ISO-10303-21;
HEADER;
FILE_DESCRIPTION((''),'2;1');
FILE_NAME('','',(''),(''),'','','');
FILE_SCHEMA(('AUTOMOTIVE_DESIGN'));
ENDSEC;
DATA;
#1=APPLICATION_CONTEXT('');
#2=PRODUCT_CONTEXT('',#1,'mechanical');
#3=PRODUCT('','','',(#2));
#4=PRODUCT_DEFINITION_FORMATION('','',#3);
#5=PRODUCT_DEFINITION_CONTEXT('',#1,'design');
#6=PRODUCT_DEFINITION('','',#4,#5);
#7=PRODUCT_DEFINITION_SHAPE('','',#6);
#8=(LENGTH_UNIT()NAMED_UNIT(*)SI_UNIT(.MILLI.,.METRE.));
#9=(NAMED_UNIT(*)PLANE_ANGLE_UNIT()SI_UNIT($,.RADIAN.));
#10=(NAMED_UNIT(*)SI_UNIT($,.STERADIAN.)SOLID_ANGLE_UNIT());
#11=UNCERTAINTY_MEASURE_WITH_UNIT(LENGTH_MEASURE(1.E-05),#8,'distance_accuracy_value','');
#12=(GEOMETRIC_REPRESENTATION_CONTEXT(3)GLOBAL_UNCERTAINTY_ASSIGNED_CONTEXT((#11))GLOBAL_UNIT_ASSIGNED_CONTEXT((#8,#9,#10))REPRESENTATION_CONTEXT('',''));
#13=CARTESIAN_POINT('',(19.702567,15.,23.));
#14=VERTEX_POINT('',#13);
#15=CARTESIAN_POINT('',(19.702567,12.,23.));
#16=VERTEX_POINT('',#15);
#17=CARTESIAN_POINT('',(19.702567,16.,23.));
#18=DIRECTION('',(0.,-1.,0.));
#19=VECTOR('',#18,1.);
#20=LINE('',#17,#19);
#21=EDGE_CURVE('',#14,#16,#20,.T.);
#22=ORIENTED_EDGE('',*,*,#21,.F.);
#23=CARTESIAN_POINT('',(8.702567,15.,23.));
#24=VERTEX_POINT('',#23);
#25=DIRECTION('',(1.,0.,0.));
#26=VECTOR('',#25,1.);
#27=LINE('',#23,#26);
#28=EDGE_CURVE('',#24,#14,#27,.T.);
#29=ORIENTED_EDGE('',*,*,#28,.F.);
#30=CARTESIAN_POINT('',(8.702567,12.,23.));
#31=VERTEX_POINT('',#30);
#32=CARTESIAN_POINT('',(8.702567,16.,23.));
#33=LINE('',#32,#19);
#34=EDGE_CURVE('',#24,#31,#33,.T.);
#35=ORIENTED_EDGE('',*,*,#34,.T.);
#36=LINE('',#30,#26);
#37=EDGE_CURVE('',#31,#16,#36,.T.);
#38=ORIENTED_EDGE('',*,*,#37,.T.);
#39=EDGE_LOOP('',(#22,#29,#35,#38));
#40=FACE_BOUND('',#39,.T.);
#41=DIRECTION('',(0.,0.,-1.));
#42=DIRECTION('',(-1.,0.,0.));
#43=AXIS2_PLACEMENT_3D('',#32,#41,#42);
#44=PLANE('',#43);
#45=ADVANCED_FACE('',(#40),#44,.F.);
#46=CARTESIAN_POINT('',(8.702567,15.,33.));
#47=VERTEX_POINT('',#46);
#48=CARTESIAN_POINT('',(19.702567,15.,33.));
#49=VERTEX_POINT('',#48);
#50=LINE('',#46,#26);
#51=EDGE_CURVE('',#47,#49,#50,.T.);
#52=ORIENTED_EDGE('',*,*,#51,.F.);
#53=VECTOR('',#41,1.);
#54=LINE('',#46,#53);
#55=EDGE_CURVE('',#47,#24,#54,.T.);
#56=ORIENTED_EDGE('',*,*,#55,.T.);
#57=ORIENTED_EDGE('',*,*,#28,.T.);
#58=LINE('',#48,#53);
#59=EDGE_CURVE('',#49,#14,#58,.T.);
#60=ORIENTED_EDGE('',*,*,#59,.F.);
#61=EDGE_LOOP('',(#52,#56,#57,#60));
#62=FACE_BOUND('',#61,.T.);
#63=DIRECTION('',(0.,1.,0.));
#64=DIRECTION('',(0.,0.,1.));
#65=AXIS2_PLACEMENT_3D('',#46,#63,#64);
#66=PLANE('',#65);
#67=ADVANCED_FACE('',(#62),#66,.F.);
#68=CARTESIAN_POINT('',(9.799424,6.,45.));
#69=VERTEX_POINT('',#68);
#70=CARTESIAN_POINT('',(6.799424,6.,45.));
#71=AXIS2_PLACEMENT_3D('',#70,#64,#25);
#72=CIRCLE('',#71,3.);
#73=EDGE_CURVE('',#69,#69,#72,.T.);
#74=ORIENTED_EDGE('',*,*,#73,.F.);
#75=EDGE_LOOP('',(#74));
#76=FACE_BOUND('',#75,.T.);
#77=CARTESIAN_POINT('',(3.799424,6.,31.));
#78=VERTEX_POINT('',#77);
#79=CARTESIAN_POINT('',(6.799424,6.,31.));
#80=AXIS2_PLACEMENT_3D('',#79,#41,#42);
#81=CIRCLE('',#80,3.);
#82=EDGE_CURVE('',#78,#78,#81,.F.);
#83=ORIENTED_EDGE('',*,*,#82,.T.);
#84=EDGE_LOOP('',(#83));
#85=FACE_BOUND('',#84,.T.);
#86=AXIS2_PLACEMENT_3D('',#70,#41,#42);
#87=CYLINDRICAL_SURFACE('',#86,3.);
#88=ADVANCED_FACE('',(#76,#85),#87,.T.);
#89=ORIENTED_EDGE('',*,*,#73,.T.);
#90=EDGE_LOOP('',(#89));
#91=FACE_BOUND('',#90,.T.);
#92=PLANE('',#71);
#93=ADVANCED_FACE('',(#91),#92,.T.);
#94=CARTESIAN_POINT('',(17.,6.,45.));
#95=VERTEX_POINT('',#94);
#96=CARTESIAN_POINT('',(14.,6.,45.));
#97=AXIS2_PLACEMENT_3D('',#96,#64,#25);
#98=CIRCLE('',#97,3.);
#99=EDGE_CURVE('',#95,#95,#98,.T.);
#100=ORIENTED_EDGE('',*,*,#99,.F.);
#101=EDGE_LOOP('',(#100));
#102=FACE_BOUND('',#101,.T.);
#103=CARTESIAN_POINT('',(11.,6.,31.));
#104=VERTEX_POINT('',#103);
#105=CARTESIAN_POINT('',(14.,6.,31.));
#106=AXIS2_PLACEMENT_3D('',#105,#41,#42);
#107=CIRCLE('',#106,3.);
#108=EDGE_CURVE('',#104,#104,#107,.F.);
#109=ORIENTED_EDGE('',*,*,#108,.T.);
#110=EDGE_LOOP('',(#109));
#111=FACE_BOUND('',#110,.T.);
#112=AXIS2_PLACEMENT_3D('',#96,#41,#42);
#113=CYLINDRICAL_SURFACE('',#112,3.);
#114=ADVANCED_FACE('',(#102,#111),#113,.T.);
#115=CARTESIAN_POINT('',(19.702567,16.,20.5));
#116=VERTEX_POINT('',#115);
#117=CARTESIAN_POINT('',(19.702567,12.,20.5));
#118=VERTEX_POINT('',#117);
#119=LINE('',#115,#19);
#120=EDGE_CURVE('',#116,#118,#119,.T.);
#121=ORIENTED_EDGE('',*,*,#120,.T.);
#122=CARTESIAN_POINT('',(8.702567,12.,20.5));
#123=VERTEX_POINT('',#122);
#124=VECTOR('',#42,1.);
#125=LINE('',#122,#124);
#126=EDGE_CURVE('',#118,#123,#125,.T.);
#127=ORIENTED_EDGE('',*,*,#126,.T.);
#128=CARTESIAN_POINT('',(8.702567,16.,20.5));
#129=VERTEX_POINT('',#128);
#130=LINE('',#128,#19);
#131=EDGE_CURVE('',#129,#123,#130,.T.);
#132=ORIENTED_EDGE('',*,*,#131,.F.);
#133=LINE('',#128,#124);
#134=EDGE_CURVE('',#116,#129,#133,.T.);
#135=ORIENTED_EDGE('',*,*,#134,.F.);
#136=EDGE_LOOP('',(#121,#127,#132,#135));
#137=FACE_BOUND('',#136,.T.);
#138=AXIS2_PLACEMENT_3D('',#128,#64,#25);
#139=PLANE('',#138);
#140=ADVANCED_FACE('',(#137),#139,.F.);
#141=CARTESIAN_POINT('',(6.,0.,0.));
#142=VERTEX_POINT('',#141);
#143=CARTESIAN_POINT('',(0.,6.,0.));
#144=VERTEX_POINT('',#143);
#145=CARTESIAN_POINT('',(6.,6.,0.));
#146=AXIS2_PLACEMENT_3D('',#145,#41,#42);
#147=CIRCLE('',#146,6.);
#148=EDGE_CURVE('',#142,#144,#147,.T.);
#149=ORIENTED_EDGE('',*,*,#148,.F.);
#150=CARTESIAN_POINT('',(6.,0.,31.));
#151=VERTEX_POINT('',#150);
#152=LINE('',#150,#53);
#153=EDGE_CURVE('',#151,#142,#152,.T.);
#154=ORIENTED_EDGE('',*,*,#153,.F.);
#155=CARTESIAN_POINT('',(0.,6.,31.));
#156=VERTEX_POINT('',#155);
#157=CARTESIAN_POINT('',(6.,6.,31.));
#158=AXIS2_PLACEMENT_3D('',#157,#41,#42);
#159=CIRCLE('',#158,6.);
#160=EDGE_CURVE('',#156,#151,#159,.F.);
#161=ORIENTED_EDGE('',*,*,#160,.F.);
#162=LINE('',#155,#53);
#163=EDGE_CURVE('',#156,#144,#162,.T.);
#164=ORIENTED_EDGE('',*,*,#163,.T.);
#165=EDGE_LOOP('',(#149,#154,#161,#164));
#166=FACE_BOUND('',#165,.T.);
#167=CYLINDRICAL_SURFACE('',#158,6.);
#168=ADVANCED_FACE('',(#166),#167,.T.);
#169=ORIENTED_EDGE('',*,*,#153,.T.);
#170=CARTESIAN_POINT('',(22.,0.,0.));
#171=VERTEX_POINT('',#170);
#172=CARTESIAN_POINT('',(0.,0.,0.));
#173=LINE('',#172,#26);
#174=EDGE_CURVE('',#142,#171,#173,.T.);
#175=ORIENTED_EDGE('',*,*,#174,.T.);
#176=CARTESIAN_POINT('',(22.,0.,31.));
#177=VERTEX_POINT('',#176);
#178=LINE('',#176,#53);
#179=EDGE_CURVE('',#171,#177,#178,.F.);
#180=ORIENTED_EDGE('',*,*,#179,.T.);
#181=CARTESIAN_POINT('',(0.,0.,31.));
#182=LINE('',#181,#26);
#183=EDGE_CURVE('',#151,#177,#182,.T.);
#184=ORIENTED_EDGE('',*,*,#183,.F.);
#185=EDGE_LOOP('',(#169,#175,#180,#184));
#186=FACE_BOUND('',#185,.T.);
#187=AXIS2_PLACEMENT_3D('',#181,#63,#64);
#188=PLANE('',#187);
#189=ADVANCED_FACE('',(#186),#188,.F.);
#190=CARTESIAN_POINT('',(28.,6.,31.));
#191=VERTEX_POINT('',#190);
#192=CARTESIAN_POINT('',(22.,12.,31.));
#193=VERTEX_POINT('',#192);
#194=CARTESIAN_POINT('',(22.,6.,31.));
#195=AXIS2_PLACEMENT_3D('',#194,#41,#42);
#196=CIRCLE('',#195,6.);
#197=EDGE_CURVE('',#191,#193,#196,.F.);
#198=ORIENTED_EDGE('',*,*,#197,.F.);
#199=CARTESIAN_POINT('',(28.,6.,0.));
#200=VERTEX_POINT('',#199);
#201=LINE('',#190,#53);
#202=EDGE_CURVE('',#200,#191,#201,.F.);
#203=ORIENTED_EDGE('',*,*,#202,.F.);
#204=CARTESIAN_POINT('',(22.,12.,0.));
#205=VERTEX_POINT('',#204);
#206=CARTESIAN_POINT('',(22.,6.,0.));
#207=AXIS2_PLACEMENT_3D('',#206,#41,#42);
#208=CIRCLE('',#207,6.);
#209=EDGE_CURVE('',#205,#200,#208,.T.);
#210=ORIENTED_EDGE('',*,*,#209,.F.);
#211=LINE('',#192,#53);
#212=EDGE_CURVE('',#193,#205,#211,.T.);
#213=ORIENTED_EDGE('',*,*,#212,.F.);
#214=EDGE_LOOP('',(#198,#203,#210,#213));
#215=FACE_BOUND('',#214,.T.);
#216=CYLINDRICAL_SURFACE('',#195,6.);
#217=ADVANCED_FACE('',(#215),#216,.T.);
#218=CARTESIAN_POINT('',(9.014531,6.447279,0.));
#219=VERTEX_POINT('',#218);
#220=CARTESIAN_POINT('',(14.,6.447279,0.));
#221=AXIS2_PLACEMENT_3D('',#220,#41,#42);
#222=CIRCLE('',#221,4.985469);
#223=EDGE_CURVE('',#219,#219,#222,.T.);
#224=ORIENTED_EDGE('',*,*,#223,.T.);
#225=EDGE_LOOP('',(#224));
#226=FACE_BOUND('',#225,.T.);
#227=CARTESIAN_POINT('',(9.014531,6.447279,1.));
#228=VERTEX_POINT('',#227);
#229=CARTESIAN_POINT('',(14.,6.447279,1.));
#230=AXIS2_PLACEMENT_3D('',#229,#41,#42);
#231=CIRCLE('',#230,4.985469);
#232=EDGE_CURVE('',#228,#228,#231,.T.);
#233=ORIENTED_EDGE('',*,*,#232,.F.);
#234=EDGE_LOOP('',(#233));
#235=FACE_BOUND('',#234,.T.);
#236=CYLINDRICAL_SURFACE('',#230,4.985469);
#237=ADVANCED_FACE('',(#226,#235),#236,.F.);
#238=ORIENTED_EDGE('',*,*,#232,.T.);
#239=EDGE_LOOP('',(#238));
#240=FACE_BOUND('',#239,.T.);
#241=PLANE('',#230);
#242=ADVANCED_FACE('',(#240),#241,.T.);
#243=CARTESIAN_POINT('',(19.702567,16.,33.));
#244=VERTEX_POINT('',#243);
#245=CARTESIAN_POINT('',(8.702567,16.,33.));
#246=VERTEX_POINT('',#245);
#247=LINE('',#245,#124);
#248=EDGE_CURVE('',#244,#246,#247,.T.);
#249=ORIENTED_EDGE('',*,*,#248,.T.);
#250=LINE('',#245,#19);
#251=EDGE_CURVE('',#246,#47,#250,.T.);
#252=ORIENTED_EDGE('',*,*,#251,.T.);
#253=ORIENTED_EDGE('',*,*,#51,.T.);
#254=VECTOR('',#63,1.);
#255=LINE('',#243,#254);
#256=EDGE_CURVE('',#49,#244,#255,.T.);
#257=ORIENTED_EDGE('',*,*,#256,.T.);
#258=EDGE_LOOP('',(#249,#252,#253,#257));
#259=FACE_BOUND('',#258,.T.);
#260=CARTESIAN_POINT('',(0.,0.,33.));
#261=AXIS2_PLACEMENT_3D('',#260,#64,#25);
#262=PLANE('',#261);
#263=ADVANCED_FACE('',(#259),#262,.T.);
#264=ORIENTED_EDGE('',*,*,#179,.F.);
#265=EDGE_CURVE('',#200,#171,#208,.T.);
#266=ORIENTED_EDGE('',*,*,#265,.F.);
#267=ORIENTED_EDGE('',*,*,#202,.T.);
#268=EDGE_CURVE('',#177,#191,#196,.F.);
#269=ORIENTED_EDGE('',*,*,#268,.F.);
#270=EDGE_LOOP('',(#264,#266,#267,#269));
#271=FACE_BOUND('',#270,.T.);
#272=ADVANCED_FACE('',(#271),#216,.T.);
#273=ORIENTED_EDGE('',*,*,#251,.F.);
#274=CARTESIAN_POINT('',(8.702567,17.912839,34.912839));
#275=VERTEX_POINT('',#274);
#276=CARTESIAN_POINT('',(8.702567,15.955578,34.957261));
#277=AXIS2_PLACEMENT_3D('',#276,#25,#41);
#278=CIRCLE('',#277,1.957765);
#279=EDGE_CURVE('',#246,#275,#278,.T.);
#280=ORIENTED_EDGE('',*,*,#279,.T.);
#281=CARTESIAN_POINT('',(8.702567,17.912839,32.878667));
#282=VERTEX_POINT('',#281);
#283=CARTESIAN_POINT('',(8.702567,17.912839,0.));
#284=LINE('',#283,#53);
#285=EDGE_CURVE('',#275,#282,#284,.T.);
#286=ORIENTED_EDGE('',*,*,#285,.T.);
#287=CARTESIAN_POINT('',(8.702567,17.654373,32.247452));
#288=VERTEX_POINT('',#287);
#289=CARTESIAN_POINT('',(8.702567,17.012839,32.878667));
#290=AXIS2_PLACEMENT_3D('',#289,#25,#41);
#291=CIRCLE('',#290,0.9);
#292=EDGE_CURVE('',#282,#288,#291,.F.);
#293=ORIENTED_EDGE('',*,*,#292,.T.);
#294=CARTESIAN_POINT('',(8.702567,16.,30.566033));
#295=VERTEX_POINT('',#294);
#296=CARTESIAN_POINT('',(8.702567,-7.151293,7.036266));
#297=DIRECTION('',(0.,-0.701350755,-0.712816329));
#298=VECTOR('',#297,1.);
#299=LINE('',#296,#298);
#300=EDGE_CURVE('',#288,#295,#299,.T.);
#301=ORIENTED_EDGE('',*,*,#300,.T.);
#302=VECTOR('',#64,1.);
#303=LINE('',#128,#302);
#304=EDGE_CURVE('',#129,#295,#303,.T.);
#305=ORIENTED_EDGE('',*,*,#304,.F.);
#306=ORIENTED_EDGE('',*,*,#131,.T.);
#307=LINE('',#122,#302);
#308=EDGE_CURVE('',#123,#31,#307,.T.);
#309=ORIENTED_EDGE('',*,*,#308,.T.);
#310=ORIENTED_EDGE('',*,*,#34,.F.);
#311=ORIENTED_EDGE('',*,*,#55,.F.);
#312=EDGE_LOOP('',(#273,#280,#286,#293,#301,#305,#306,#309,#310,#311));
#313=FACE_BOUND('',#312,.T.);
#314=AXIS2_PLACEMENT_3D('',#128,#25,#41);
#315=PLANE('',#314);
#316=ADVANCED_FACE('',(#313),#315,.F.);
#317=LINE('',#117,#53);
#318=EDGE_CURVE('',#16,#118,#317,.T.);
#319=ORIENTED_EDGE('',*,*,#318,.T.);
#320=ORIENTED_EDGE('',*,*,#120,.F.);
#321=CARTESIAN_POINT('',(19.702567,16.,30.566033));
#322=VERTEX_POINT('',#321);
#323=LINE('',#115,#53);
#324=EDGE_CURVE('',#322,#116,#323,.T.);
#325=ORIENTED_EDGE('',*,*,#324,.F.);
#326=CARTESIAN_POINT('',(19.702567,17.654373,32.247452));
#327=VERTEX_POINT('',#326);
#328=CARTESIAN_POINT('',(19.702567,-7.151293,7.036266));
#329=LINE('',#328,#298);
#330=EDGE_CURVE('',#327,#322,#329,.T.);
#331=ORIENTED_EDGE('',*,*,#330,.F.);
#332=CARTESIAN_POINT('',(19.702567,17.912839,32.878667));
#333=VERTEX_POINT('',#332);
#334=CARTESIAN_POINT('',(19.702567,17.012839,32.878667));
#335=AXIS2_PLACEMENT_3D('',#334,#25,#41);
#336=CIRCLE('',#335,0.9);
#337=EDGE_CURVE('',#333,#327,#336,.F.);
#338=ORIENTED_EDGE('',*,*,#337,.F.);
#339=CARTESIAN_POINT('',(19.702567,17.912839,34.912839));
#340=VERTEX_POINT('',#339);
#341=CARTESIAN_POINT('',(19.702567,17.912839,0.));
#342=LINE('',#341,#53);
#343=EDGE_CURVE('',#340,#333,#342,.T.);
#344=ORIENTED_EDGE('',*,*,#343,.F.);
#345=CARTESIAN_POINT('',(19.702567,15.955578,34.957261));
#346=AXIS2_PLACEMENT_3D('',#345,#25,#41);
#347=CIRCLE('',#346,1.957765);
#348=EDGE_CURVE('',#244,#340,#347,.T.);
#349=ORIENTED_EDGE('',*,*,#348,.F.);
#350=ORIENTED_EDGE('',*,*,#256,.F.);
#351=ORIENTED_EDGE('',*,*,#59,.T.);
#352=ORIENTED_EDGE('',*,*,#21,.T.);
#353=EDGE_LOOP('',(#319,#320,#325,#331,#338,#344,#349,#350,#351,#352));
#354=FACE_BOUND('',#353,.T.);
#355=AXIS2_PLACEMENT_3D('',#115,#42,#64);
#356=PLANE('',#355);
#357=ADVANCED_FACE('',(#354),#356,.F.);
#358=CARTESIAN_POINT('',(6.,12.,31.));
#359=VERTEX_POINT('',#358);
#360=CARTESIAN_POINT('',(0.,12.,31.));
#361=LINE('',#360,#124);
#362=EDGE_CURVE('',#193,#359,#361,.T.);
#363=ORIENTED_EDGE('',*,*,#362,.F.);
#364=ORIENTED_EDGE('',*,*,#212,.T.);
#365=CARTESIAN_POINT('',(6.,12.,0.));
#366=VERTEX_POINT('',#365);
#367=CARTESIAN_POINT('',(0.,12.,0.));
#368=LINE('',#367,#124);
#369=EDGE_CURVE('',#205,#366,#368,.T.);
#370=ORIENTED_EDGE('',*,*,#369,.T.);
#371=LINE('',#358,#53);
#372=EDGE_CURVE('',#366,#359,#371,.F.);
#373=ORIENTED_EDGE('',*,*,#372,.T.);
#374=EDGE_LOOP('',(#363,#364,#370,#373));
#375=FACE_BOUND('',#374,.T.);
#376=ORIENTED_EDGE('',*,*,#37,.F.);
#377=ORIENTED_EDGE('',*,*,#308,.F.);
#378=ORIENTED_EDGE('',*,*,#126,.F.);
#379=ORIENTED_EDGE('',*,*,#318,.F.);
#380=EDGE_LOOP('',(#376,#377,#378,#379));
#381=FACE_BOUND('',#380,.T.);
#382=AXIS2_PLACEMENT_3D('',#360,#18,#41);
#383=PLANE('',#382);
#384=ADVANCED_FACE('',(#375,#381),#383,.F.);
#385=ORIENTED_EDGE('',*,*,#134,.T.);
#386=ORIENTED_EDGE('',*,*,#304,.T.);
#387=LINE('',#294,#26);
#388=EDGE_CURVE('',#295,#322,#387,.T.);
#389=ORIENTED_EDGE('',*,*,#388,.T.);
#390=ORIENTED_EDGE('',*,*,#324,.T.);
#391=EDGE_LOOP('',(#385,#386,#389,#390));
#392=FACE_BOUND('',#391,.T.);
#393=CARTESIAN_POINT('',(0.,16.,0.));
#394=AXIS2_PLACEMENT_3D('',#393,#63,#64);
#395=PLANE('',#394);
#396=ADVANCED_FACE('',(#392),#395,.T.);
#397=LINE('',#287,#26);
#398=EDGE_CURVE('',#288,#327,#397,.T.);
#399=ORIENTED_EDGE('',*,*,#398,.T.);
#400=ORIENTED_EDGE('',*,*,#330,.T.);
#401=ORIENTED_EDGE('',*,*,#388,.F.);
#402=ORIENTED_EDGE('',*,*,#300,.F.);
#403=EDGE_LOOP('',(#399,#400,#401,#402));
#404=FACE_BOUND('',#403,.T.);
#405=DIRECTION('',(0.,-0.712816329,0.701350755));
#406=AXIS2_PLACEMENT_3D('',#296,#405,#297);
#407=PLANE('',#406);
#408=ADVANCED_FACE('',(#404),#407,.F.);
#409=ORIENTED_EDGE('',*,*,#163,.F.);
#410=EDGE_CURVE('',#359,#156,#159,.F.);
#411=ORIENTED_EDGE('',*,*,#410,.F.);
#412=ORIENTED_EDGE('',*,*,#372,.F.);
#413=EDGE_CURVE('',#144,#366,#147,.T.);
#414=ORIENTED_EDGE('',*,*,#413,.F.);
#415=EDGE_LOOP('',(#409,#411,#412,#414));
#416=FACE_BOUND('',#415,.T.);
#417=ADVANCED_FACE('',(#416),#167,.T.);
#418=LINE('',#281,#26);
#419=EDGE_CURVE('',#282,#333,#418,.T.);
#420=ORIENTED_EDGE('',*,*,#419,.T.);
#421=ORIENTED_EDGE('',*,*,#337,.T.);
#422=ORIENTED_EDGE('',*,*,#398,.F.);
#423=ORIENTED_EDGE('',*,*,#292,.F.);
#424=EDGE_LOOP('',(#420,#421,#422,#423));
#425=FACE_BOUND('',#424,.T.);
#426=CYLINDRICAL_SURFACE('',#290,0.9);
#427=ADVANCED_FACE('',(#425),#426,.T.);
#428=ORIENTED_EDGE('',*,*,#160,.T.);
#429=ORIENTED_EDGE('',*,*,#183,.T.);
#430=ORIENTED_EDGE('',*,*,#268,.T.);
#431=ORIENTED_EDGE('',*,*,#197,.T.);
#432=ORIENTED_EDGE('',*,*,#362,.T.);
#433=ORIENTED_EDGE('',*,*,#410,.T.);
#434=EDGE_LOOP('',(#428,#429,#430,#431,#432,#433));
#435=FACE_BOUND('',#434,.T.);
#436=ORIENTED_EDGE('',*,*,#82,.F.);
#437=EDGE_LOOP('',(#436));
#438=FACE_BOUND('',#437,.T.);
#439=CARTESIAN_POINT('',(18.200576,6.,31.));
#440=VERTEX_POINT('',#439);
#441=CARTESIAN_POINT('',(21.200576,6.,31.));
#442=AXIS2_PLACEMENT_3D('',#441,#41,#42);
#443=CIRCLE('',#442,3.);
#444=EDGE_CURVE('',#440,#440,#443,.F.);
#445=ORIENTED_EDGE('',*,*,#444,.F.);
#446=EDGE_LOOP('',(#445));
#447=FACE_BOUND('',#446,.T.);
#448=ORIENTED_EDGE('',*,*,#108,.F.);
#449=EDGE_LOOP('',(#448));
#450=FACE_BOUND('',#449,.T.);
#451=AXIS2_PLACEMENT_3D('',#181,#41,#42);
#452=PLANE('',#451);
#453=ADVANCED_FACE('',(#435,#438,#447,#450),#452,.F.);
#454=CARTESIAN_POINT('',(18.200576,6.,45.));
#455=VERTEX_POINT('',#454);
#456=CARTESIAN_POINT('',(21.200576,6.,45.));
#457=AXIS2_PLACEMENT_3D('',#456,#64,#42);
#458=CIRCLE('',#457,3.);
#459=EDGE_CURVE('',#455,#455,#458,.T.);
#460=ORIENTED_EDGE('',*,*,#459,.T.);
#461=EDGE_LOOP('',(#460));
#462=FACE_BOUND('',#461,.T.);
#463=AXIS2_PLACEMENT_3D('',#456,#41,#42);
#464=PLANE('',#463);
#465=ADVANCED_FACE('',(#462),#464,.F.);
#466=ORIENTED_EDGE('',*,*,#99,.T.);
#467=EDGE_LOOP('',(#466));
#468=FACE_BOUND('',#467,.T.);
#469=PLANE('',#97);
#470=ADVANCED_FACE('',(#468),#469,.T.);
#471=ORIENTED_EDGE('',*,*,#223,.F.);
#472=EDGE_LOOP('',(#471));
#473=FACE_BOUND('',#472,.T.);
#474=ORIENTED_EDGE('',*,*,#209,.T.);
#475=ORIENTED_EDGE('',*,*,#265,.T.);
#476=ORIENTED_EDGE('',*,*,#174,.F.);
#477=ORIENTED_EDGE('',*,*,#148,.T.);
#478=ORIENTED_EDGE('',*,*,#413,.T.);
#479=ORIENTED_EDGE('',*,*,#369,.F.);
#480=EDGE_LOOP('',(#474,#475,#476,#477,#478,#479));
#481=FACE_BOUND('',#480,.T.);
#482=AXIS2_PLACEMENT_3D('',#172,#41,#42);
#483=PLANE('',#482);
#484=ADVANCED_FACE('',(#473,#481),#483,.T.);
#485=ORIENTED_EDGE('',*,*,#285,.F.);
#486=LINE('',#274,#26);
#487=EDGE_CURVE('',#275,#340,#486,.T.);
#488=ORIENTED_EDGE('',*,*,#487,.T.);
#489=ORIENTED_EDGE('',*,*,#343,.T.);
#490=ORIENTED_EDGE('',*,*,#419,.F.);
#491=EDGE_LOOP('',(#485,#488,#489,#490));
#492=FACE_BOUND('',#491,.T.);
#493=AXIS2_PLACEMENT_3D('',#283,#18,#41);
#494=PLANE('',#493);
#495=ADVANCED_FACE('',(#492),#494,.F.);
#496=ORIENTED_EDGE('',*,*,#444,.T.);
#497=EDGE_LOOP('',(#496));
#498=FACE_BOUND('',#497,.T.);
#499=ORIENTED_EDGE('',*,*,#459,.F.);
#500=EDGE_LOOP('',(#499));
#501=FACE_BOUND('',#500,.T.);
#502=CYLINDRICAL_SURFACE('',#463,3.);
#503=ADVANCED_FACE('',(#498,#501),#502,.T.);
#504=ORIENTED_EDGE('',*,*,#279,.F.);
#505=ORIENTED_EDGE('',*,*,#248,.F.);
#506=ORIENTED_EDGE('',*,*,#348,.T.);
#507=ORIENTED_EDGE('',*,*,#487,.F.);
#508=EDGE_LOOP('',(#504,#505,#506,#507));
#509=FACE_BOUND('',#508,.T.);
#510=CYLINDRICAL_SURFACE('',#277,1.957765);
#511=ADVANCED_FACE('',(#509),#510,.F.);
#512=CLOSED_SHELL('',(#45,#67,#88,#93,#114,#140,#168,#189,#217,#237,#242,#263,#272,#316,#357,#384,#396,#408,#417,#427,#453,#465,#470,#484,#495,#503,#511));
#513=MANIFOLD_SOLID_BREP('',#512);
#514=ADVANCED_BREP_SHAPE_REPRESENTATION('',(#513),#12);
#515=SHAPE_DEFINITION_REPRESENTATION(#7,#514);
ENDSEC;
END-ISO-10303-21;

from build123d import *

# Parameters (mm, degrees)
SKETCH_1_W          = 28
SKETCH_1_H          = 12
EXTRUDE_1_DEPTH     = 31
FILLET_1_R          = 6
SKETCH_2_R          = 3
EXTRUDE_2_DEPTH     = 14
SKETCH_3_W          = 11
SKETCH_3_H          = 2.5
EXTRUDE_3_DEPTH     = 4
SKETCH_4_W          = 11
SKETCH_4_H          = 1
EXTRUDE_4_DEPTH     = 10
EXTRUDE_5_DEPTH     = 11
SKETCH_7_R          = 4.985468992
CUT_EXTRUDE_1_DEPTH = 1


with BuildPart() as part:
    # ｽｹｯﾁ1 → ﾎﾞｽ - 押し出し1 (new body)
    with BuildSketch(Plane.XY):
        with Locations((14, 6)):
            Rectangle(SKETCH_1_W, SKETCH_1_H)
    extrude(amount=EXTRUDE_1_DEPTH)

    # ﾌｨﾚｯﾄ1
    fillet_1_edges = [part.edges().sort_by_distance(p)[0] for p in [
        (28, 0, 15.5),
        (28, 12, 15.5),
        (0, 0, 15.5),
        (0, 12, 15.5),
    ]]
    fillet(fillet_1_edges, radius=FILLET_1_R - 0.0001)  # a hair under: the kernel refuses the full size

    # ｽｹｯﾁ2 → ﾎﾞｽ - 押し出し2 (add)
    with BuildSketch(Plane.XY.offset(31)):
        with Locations(Location((14, 6, 0), (0, 0, 180))):
            Circle(SKETCH_2_R)
        with Locations(Location((6.799424136, 6, 0), (0, 0, 180))):
            Circle(SKETCH_2_R)
        with Locations(Location((21.200575864, 6, 0), (0, 0, 180))):
            Circle(SKETCH_2_R)
    extrude(amount=EXTRUDE_2_DEPTH)

    # ｽｹｯﾁ3 → ﾎﾞｽ - 押し出し3 (add)
    with BuildSketch(Plane(origin=(0, 12, 0), x_dir=(1, 0, 0), z_dir=(0, 1, 0))):
        with Locations((14.202566522, -21.75)):
            Rectangle(SKETCH_3_W, SKETCH_3_H)
    extrude(amount=EXTRUDE_3_DEPTH)

    # ｽｹｯﾁ4 → ﾎﾞｽ - 押し出し4 (add)
    with BuildSketch(Plane.XY.offset(23)):
        with Locations((14.202566522, 15.5)):
            Rectangle(SKETCH_4_W, SKETCH_4_H)
    extrude(amount=EXTRUDE_4_DEPTH)

    # ｽｹｯﾁ6 → ﾎﾞｽ - 押し出し5 (add)
    with BuildSketch(Plane(origin=(19.702566522, 0, 0), x_dir=(0, 0, -1), z_dir=(1, 0, 0))):
        with BuildLine():
            Line((-32.878667376, 17.912838666), (-34.912838666, 17.912838666))
            ThreePointArc((-34.912838666, 17.912838666), (-33.572911973, 17.339926693), (-33, 16))
            Line((-33, 16), (-30.566032893, 16))
            Line((-30.566032893, 16), (-32.247451697, 17.654373362))
            ThreePointArc((-32.247451697, 17.654373362), (-32.537625756, 17.845719578), (-32.878667376, 17.912838666))
        make_face()
    extrude(amount=-EXTRUDE_5_DEPTH)

    # ｽｹｯﾁ7 → ｶｯﾄ - 押し出し1 (cut)
    with BuildSketch(Plane(origin=(0, 0, 0), x_dir=(-1, 0, 0), z_dir=(0, 0, -1))):
        with Locations((-14, 6.447278685)):
            Circle(SKETCH_7_R)
    extrude(amount=-CUT_EXTRUDE_1_DEPTH, mode=Mode.SUBTRACT)


solid = part.part
